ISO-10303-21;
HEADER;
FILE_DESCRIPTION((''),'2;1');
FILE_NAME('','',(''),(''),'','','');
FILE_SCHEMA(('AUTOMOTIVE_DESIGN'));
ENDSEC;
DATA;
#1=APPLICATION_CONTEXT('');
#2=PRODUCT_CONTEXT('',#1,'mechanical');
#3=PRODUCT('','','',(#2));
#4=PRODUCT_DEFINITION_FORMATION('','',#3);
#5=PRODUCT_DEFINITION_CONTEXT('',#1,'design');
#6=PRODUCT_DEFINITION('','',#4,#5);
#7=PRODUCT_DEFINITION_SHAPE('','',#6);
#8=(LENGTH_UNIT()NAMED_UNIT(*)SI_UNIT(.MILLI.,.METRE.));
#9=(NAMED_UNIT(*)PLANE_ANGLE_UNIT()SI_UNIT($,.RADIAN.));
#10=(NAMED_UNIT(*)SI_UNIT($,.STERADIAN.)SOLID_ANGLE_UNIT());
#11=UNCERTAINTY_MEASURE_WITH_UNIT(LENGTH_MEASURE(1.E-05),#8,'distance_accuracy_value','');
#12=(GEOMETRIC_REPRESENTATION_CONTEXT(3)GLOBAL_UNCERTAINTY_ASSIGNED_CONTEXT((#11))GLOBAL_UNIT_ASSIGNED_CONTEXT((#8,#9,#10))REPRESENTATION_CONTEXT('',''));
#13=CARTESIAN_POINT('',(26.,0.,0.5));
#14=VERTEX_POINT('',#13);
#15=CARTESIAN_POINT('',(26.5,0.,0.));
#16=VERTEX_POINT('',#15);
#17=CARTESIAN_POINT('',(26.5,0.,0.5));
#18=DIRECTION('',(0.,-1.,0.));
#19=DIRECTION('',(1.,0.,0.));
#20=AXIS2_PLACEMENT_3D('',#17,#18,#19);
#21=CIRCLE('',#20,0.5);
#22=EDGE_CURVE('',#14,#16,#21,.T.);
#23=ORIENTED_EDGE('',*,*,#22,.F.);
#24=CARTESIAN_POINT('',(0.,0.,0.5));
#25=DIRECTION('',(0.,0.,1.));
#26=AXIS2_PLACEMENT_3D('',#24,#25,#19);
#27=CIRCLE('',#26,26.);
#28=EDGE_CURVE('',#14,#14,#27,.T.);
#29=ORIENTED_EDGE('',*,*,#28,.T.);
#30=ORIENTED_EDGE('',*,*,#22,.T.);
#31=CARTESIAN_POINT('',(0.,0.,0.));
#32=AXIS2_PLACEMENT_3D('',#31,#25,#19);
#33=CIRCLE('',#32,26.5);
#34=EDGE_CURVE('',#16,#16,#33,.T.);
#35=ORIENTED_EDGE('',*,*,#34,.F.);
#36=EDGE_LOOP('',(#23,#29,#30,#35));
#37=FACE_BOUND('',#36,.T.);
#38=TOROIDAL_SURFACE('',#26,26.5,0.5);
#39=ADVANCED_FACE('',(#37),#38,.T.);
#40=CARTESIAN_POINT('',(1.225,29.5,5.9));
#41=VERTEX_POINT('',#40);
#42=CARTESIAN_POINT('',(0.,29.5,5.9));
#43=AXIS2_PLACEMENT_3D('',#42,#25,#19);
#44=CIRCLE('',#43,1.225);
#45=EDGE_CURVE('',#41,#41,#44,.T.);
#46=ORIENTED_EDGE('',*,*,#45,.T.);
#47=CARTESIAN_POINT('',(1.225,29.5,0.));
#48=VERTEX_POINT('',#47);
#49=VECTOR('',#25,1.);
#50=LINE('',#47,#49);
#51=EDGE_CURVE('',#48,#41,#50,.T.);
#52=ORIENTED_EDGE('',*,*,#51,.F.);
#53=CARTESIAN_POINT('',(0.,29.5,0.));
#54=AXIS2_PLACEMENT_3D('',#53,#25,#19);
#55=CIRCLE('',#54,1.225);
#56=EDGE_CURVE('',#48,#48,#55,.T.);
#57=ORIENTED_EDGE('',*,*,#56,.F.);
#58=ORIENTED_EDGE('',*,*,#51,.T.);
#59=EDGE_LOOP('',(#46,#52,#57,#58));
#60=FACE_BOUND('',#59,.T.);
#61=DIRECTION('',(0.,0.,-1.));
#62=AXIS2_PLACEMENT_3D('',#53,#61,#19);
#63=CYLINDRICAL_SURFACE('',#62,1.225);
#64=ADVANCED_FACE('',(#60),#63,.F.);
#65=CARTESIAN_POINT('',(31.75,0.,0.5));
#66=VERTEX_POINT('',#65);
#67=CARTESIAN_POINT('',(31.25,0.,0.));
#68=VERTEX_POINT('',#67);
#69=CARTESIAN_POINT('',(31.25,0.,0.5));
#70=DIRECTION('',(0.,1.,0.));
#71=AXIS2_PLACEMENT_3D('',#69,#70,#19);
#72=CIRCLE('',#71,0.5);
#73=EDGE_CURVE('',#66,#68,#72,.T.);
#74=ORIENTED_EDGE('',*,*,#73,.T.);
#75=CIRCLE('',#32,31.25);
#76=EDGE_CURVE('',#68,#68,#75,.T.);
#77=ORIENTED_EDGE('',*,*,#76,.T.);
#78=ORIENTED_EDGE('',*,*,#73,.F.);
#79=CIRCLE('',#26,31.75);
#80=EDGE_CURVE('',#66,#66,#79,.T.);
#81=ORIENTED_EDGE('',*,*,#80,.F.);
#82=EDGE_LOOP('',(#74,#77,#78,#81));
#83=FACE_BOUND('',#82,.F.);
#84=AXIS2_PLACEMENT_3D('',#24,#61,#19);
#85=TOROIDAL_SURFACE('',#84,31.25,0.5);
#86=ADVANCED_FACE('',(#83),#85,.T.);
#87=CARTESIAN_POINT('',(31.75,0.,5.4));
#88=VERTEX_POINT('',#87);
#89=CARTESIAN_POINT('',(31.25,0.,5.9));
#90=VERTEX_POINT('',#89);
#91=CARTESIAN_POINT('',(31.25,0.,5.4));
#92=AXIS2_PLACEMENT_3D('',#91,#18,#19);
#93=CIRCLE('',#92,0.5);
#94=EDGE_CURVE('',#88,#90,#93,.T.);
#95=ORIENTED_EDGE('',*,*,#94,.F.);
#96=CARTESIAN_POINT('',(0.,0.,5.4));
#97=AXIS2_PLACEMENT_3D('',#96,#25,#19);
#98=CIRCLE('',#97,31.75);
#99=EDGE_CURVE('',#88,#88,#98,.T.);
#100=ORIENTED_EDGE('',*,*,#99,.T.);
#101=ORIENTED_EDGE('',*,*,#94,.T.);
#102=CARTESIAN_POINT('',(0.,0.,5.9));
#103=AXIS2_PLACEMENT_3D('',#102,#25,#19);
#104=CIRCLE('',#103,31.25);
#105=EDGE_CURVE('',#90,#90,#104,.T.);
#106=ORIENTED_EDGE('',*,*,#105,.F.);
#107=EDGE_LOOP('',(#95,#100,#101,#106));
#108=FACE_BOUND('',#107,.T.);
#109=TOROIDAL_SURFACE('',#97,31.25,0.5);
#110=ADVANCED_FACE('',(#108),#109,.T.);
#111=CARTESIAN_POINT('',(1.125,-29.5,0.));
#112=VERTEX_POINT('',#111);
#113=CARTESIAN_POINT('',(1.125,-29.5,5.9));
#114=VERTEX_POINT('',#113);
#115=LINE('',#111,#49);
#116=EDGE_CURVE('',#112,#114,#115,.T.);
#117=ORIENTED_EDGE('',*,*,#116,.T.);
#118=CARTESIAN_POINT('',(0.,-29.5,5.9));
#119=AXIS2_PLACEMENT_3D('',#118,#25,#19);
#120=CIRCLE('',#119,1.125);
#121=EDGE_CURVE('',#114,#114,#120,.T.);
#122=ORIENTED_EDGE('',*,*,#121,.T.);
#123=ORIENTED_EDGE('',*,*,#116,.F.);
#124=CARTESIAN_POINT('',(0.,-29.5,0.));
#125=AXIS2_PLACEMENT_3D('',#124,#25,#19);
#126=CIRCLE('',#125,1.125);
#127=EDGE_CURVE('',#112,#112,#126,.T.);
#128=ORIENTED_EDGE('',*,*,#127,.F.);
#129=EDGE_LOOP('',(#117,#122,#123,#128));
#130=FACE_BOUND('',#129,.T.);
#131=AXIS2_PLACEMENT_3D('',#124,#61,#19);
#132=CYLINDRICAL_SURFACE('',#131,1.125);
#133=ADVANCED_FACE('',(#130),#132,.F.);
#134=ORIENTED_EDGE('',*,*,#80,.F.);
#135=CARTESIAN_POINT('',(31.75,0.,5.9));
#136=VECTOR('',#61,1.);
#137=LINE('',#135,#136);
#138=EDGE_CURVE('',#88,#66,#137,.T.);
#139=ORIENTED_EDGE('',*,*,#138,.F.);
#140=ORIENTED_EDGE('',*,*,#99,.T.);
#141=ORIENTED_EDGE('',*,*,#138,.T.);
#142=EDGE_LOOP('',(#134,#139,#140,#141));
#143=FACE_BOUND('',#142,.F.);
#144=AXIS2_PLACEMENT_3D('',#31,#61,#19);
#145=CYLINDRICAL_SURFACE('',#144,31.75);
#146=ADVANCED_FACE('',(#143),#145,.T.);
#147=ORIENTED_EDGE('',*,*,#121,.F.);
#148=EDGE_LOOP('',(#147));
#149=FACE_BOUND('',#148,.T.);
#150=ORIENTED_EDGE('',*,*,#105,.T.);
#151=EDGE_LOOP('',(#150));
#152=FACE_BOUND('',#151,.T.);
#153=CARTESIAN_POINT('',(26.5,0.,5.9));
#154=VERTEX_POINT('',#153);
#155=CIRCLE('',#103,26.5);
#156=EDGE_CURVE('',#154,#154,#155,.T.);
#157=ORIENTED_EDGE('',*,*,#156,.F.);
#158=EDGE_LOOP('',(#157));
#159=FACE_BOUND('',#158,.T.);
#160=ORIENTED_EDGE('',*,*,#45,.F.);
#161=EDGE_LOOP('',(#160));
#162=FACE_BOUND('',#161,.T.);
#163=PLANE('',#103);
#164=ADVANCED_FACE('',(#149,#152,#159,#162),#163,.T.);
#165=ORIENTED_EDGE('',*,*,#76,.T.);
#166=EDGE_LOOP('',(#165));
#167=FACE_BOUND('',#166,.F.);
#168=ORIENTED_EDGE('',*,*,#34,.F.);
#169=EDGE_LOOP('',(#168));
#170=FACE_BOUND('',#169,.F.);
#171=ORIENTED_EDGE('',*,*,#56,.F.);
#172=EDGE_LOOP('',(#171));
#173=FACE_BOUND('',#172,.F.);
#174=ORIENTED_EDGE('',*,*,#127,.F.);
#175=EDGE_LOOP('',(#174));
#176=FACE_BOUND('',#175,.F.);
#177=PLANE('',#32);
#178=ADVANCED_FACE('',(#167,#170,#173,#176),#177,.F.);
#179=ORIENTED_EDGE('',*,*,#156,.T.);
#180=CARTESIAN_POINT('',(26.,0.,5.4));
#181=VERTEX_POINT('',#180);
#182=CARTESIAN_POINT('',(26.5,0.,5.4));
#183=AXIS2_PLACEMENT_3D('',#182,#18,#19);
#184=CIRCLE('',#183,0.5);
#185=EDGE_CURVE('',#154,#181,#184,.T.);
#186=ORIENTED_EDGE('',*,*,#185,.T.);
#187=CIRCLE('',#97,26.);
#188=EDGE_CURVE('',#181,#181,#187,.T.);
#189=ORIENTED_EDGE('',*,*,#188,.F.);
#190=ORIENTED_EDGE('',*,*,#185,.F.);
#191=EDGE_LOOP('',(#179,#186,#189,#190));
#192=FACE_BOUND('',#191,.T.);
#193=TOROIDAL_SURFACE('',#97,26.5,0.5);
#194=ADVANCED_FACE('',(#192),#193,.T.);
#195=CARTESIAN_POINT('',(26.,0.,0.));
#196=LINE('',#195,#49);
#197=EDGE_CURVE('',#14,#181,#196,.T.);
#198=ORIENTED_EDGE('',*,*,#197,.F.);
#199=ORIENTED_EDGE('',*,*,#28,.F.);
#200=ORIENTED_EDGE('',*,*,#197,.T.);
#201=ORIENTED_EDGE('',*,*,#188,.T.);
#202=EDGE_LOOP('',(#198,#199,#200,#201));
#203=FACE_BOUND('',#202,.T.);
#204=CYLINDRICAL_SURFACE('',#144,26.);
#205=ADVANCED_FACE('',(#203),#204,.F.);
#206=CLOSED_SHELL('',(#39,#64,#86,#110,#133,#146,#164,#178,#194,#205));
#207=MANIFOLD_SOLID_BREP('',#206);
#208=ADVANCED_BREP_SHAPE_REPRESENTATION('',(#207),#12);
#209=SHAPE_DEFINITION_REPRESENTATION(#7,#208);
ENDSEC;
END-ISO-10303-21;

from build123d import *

# Parameters (mm, degrees)
F0_R     = 31.75
F0_R_2   = 1.125
F0_R_3   = 26
F0_R_4   = 1.225
F1_DEPTH = 5
F2_DEPTH = 5.9
F3_R     = 0.5
F4_R     = 0.5


with BuildPart() as f1:
    # F0 (on Top) → F1 (new body)
    with BuildSketch(Plane.XY):
        Circle(F0_R)
        with Locations((0, -29.5)):
            Circle(F0_R_2, mode=Mode.SUBTRACT)
        Circle(F0_R_3, mode=Mode.SUBTRACT)
        with Locations((0, 29.5)):
            Circle(F0_R_4, mode=Mode.SUBTRACT)
    extrude(amount=F1_DEPTH)

    # F0 (on Top) → F2 (join)
    with BuildSketch(Plane.XY):
        Circle(F0_R)
        with Locations((0, -29.5)):
            Circle(F0_R_2, mode=Mode.SUBTRACT)
        Circle(F0_R_3, mode=Mode.SUBTRACT)
        with Locations((0, 29.5)):
            Circle(F0_R_4, mode=Mode.SUBTRACT)
    extrude(amount=F2_DEPTH)

    # F3
    f3_edges = [f1.edges().sort_by_distance(p)[0] for p in [
        (-26, 0, 0),
        (-31.75, 0, 0),
        (-31.75, 0, 5.9),
    ]]
    fillet(f3_edges, radius=F3_R)

    # F4
    f4_edges = [f1.edges().sort_by_distance(p)[0] for p in [
        (-26, 0, 5.9),
        (-31.75, 0, 5.4),
    ]]
    fillet(f4_edges, radius=F4_R)


solid = f1.part
